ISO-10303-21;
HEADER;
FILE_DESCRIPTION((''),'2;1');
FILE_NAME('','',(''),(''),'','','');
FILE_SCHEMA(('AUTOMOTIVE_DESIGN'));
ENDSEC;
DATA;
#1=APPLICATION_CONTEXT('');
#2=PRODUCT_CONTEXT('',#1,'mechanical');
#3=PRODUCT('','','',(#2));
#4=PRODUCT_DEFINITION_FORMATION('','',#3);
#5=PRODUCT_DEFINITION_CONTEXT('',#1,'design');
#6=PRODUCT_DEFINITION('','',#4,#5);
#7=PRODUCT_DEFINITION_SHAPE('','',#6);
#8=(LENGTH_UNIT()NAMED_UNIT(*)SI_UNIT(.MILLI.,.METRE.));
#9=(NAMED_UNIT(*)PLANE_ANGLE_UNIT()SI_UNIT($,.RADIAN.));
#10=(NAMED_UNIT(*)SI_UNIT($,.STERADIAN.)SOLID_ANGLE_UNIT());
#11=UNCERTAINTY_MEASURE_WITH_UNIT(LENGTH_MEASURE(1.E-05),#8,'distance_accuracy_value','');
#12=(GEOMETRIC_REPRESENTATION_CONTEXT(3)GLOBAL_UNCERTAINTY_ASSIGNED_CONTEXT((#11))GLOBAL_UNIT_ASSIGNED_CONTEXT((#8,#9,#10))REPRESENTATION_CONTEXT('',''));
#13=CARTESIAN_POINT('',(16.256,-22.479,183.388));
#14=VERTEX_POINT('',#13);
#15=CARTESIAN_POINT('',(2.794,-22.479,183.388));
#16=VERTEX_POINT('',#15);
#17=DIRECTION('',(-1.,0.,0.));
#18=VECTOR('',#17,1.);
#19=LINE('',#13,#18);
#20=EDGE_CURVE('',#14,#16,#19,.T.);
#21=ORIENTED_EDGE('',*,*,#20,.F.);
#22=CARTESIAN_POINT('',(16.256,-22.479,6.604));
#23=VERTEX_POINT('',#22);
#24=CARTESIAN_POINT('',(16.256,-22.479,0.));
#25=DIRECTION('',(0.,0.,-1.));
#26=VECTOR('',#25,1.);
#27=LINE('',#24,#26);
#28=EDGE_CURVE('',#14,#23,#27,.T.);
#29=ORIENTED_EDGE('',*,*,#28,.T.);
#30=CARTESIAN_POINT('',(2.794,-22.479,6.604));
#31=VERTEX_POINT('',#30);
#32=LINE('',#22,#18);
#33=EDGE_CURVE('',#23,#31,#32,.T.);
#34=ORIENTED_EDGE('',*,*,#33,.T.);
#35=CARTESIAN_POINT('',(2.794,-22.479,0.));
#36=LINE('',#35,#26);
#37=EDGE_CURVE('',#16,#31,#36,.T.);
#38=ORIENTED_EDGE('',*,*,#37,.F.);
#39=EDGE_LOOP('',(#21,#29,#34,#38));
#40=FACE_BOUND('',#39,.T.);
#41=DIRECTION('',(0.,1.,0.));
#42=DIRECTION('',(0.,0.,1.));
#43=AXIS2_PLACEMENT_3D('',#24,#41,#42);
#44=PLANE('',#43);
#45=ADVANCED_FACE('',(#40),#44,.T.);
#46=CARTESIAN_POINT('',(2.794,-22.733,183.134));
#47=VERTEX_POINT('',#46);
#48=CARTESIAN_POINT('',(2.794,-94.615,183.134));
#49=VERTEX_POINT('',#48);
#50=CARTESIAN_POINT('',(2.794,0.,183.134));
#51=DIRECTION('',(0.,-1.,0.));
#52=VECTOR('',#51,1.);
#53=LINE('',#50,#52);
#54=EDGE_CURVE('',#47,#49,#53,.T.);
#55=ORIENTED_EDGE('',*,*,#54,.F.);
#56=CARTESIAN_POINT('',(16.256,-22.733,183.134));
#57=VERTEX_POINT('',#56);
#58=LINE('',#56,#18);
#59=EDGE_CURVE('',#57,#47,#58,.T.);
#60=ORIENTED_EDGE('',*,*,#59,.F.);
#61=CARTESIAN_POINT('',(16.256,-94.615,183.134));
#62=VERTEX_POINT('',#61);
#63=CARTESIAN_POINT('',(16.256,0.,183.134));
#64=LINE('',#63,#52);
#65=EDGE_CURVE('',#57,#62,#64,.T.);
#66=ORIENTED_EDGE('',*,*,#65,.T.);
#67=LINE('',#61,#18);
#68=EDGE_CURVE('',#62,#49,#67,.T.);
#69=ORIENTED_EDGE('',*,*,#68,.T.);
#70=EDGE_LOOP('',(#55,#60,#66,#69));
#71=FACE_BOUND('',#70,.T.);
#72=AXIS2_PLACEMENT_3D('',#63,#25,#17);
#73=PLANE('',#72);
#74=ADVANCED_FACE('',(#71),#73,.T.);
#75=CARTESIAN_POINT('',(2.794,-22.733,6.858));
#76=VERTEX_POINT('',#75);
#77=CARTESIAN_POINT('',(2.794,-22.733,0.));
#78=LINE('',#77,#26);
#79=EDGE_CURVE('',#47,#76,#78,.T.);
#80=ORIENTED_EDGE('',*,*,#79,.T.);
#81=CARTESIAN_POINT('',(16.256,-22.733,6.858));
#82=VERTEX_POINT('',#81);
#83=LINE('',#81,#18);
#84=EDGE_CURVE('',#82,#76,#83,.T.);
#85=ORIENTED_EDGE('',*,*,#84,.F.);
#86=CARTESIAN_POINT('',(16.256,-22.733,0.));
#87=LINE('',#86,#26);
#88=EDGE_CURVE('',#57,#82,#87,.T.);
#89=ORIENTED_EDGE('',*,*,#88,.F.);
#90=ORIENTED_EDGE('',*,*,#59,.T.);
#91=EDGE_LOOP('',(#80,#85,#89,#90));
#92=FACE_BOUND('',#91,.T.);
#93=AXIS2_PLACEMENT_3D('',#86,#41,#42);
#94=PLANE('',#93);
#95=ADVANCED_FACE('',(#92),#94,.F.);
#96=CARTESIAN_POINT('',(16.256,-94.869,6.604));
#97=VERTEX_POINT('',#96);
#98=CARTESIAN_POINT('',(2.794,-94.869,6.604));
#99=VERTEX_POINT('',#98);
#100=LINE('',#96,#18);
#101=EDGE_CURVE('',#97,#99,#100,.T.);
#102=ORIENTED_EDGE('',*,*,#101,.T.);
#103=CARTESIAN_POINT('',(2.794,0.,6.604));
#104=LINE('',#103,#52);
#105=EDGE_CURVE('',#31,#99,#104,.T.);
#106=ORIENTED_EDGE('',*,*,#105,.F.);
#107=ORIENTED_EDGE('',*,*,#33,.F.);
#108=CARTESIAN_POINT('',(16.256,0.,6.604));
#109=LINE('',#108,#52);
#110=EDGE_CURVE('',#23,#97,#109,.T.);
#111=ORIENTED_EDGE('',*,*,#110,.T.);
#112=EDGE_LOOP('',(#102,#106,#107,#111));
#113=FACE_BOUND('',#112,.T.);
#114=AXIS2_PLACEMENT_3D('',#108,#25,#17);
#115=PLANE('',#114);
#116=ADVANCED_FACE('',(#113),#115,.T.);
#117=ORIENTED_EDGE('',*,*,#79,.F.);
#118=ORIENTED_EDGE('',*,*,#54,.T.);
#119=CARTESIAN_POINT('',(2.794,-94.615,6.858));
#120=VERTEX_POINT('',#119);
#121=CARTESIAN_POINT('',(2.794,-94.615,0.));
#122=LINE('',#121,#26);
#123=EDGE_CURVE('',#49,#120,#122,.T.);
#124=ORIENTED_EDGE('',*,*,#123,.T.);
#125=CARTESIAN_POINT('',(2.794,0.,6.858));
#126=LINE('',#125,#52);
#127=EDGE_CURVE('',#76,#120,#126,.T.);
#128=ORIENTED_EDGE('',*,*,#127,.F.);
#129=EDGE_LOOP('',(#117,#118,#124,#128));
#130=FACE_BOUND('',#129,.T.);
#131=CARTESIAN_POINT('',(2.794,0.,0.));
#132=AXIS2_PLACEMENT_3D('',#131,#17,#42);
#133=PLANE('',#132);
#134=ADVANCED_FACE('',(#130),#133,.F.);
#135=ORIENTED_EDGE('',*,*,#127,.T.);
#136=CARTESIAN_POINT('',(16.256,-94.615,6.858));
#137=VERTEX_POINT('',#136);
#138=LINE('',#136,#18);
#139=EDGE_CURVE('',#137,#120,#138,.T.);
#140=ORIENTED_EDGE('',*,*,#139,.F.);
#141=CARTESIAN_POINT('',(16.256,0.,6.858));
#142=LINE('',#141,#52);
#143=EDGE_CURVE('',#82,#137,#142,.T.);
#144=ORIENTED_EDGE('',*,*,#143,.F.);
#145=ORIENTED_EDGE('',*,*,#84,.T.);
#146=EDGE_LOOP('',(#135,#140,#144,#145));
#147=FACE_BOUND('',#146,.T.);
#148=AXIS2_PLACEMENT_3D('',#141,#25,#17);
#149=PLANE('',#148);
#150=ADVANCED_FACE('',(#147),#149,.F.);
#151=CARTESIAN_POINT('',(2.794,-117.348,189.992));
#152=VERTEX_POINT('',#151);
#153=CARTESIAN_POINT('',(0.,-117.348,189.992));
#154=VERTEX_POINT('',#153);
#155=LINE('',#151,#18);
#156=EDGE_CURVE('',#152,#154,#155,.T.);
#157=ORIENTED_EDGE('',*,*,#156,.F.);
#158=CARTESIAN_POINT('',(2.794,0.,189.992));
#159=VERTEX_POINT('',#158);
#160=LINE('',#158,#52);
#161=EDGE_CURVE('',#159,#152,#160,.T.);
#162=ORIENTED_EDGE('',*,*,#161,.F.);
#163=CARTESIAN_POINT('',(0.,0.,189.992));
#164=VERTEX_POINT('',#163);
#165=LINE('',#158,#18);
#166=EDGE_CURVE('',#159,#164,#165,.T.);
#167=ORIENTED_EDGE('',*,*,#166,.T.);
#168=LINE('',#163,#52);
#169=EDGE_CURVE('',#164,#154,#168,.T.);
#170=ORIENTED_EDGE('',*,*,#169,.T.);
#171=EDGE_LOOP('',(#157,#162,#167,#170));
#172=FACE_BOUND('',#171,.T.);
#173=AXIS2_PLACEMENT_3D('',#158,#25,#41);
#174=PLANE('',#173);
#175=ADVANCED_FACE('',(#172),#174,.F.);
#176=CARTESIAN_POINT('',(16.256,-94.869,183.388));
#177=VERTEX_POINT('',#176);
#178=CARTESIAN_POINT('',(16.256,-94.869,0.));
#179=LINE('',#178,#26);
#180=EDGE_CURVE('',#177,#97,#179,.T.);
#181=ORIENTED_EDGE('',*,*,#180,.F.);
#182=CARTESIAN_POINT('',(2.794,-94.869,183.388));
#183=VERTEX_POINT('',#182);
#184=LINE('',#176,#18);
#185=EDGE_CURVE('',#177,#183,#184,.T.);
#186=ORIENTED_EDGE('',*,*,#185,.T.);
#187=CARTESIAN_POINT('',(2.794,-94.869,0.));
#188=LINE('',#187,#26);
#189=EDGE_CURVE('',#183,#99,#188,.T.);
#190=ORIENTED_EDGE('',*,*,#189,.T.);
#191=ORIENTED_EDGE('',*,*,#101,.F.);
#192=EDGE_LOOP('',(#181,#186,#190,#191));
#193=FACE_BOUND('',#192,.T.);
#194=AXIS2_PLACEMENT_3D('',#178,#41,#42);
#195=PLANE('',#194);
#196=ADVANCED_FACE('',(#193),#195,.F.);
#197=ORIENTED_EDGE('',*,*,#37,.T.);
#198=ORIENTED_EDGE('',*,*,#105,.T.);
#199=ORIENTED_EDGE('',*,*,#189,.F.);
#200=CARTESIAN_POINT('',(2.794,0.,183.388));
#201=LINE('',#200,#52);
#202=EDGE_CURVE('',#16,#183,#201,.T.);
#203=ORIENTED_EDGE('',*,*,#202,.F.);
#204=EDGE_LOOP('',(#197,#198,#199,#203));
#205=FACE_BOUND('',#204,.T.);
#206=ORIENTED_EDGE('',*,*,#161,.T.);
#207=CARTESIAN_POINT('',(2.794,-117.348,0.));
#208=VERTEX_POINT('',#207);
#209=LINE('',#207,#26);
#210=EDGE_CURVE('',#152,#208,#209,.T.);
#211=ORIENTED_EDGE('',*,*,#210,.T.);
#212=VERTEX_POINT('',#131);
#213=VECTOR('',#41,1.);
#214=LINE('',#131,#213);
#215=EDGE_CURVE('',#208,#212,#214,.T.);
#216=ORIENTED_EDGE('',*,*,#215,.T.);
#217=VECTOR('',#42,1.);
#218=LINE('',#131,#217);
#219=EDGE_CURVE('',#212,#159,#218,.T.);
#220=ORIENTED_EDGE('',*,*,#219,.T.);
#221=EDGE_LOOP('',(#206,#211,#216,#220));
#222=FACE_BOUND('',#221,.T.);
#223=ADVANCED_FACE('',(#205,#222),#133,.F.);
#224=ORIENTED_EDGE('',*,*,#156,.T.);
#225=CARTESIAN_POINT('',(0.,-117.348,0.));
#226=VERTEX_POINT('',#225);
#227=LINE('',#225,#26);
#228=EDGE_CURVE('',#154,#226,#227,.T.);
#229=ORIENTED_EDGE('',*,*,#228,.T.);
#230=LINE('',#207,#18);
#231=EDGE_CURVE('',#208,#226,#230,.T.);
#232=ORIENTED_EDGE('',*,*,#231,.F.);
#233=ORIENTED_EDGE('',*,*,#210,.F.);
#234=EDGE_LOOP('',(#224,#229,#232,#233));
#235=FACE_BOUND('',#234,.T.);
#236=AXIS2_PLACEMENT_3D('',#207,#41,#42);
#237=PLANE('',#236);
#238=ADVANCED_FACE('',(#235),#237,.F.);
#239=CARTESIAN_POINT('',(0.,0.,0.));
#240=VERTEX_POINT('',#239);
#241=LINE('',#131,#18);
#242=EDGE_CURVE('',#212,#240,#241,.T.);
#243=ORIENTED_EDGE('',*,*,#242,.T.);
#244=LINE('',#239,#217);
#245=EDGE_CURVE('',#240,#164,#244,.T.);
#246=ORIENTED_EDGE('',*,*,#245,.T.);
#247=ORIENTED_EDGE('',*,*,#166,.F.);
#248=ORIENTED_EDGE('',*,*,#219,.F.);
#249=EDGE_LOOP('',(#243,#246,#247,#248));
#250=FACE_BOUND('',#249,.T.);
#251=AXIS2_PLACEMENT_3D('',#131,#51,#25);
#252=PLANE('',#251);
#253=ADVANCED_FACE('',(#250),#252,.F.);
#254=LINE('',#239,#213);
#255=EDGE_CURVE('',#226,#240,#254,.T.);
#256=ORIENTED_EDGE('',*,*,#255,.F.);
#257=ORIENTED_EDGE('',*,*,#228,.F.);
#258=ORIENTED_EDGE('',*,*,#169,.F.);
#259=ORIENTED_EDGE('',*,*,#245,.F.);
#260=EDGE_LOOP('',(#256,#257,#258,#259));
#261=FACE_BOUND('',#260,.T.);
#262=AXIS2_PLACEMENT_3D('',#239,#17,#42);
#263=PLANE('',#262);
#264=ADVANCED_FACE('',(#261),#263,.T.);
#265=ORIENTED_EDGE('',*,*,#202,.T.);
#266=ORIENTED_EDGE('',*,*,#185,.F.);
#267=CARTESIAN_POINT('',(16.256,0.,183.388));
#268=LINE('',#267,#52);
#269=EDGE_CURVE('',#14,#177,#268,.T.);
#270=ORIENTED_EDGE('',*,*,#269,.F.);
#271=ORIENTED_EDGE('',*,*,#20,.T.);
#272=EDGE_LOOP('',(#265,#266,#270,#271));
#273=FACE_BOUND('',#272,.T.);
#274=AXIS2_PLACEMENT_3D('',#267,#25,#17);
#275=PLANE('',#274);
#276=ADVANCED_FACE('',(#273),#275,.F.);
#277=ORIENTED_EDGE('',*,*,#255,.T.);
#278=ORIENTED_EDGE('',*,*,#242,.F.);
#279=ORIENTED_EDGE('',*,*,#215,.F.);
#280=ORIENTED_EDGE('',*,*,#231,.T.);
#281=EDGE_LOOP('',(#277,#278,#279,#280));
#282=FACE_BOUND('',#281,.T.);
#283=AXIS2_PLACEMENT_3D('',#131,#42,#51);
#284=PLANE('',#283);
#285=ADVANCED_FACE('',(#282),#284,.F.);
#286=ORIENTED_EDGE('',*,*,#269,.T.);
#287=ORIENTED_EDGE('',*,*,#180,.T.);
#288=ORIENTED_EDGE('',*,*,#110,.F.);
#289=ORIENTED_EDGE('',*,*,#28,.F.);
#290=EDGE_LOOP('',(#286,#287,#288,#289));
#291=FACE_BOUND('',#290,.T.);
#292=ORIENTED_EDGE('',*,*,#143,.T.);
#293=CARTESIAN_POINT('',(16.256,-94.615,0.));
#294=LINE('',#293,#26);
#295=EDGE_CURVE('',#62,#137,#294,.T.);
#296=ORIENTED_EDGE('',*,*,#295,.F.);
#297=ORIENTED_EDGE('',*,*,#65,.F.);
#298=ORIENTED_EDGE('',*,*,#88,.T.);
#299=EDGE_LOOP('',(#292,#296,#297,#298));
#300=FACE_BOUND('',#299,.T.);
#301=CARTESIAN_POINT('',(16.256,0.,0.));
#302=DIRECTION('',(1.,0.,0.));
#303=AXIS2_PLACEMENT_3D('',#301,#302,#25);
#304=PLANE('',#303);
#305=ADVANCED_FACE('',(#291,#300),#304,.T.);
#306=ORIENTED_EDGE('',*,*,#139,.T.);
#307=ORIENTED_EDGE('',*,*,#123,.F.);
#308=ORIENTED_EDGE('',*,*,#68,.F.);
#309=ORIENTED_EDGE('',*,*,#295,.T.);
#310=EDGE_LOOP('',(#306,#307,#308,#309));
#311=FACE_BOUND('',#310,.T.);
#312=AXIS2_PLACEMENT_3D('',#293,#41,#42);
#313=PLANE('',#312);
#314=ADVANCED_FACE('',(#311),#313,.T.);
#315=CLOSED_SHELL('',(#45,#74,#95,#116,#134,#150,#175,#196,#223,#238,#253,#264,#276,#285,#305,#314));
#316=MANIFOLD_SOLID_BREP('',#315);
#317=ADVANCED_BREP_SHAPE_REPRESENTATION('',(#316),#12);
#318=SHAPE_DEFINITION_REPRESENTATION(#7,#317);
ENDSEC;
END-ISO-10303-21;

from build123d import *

# Parameters (mm, degrees)
SKETCH1_W                 = 189.992
SKETCH1_H                 = 117.348
BOSS_EXTRUDE1_DEPTH       = 2.794
EXTRUDE_THIN4_OUTLINE_W   = 176.784
EXTRUDE_THIN4_OUTLINE_H   = 72.39
EXTRUDE_THIN4_OUTLINE_W_2 = 176.276
EXTRUDE_THIN4_OUTLINE_H_2 = 71.882
EXTRUDE_THIN4_DEPTH       = 13.462


# Read off the part's stored shape, not the designer's step: Extrude-Thin4
with BuildPart() as part:
    # Sketch1 → Boss-Extrude1 (new body)
    with BuildSketch(Plane(origin=(0, 0, 0), x_dir=(0, 0, -1), z_dir=(1, 0, 0))):
        with Locations((-94.996, -58.674)):
            Rectangle(SKETCH1_W, SKETCH1_H)
    extrude(amount=BOSS_EXTRUDE1_DEPTH)

    # Extrude-Thin4 outline → Extrude-Thin4 (add)
    with BuildSketch(Plane(origin=(2.794, 0, 0), x_dir=(0, 0, -1), z_dir=(1, 0, 0))):
        with Locations((-94.996, -58.674)):
            Rectangle(EXTRUDE_THIN4_OUTLINE_W, EXTRUDE_THIN4_OUTLINE_H)
        with Locations((-94.996, -58.674)):
            Rectangle(EXTRUDE_THIN4_OUTLINE_W_2, EXTRUDE_THIN4_OUTLINE_H_2, mode=Mode.SUBTRACT)
    extrude(amount=EXTRUDE_THIN4_DEPTH)


solid = part.part
